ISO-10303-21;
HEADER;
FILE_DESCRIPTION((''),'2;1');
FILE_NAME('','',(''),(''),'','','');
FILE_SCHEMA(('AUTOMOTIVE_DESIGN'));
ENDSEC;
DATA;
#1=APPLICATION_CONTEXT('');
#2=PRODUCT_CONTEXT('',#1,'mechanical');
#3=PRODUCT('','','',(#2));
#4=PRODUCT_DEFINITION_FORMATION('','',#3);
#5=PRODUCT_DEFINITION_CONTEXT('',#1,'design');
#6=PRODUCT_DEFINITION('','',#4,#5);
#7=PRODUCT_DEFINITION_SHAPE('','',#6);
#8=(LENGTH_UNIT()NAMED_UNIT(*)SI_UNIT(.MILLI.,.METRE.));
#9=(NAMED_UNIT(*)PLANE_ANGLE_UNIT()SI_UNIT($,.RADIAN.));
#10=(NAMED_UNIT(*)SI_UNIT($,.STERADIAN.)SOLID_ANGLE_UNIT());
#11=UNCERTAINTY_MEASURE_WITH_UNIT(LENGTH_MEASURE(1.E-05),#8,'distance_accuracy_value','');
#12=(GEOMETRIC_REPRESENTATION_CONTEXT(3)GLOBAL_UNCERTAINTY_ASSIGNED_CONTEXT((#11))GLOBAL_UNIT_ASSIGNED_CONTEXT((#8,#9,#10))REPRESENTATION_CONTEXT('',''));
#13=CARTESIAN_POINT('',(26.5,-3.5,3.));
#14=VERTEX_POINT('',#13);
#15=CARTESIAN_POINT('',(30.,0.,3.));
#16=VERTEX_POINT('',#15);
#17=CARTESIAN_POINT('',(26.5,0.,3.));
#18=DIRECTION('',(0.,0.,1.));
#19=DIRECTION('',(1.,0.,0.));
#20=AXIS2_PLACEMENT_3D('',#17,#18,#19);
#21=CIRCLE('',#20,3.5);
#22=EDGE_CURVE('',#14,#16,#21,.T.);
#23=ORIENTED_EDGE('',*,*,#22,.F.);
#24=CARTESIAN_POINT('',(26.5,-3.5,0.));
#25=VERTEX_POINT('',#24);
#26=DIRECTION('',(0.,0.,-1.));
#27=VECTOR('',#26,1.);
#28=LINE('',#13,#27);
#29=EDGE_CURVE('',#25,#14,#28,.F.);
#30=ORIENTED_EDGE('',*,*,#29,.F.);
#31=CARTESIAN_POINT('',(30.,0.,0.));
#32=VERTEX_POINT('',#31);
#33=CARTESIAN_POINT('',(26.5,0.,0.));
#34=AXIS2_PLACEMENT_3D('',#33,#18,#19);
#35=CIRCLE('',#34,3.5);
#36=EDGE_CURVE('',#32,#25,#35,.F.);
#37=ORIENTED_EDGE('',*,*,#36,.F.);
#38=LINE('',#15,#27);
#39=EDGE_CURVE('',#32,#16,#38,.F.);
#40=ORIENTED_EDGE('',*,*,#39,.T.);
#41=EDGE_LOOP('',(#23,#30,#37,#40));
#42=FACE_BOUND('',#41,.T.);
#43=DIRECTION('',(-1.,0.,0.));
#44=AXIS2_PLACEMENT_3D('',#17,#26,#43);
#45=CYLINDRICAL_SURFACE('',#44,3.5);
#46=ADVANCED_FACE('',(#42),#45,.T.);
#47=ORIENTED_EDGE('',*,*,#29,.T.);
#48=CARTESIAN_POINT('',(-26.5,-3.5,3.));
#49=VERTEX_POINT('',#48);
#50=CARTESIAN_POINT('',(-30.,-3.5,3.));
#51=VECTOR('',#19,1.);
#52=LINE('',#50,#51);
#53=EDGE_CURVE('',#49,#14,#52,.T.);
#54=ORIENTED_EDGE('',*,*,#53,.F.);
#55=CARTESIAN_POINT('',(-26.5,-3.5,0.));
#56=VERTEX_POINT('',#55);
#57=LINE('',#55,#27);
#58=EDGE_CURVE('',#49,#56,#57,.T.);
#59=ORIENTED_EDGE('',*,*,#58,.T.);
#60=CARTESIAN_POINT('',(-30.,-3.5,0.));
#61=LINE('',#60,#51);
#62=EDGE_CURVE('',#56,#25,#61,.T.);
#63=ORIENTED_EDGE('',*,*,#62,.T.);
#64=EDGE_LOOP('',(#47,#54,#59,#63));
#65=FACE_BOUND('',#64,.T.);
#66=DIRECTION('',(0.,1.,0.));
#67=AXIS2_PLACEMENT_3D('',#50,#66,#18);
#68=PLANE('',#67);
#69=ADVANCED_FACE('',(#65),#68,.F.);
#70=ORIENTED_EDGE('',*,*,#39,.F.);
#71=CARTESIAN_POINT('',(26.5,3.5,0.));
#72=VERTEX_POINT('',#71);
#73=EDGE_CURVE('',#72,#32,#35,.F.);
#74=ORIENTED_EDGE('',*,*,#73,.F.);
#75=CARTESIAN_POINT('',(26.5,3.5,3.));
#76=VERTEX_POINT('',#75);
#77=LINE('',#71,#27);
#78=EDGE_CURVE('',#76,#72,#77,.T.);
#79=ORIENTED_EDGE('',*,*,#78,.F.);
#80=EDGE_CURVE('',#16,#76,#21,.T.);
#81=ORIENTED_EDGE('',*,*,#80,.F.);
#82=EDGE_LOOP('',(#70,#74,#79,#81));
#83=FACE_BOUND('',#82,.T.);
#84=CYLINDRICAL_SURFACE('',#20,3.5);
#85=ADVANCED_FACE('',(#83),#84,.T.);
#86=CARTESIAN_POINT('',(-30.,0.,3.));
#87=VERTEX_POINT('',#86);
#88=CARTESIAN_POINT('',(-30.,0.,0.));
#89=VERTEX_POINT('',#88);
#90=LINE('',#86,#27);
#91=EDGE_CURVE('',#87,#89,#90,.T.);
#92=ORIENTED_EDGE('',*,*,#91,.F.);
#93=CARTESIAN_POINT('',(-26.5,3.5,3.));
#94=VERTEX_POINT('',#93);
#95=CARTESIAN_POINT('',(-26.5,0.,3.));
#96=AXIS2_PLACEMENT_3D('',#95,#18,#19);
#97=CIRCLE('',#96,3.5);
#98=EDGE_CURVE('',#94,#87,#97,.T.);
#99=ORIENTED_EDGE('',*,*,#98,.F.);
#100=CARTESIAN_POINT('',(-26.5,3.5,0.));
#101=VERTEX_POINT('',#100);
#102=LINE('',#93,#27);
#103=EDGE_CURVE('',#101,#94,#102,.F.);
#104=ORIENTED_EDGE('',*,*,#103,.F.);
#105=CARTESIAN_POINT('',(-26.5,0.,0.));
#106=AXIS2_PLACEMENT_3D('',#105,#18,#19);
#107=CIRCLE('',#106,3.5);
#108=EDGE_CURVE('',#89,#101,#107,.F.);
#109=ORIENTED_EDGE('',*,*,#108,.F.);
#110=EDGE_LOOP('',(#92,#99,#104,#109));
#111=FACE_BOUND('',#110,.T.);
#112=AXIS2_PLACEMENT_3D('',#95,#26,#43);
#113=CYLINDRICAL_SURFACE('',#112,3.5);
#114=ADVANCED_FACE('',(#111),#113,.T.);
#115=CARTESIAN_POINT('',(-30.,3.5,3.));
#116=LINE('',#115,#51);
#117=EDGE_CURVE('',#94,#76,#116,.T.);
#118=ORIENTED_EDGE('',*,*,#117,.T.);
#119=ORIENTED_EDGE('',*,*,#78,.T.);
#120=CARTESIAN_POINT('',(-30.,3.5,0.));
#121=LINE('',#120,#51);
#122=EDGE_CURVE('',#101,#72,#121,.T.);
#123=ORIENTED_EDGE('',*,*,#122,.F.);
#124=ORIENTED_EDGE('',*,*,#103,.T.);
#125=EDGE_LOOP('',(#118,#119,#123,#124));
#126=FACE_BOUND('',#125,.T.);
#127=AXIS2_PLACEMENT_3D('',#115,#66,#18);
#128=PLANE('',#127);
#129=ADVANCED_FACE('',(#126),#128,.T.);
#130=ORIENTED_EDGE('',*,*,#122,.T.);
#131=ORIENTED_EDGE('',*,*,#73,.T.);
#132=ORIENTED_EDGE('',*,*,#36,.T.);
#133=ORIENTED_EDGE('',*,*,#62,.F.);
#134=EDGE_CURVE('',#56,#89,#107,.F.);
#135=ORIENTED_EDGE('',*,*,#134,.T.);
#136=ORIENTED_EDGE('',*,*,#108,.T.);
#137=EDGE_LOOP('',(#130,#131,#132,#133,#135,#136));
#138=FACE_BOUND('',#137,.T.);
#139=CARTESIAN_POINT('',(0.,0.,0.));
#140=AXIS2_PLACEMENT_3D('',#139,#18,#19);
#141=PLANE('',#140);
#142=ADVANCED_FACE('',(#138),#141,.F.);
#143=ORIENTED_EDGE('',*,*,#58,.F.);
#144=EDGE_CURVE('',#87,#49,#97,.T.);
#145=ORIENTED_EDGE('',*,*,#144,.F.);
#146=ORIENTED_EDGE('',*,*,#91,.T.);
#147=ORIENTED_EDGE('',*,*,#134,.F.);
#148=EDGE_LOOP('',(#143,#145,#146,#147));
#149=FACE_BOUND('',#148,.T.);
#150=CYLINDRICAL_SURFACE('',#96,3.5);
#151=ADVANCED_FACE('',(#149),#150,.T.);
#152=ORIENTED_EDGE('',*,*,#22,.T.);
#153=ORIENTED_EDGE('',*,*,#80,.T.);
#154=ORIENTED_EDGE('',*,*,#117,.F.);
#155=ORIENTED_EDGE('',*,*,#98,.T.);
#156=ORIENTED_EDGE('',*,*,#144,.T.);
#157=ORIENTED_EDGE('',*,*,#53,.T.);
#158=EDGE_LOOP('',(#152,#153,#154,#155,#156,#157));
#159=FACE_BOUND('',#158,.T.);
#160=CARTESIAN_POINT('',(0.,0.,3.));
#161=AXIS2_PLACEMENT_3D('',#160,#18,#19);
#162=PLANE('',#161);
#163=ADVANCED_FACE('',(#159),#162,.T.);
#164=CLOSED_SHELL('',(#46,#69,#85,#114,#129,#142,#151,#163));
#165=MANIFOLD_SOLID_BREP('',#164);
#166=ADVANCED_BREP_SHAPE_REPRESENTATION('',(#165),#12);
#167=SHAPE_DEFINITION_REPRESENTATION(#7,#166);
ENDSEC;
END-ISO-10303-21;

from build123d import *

# Parameters (mm, degrees)
SKETCH1_W           = 60
SKETCH1_H           = 7
BOSS_EXTRUDE1_DEPTH = 3
FILLET1_R           = 3.5


with BuildPart() as part:
    # Sketch1 → Boss-Extrude1 (new body)
    with BuildSketch(Plane.XY):
        Rectangle(SKETCH1_W, SKETCH1_H)
    extrude(amount=BOSS_EXTRUDE1_DEPTH)

    # Fillet1
    fillet1_edges = [part.edges().sort_by_distance(p)[0] for p in [
        (-30, -3.5, 1.5),
        (-30, 3.5, 1.5),
        (30, -3.5, 1.5),
        (30, 3.5, 1.5),
    ]]
    fillet(fillet1_edges, radius=FILLET1_R - 0.0001)  # a hair under: the kernel refuses the full size


solid = part.part
